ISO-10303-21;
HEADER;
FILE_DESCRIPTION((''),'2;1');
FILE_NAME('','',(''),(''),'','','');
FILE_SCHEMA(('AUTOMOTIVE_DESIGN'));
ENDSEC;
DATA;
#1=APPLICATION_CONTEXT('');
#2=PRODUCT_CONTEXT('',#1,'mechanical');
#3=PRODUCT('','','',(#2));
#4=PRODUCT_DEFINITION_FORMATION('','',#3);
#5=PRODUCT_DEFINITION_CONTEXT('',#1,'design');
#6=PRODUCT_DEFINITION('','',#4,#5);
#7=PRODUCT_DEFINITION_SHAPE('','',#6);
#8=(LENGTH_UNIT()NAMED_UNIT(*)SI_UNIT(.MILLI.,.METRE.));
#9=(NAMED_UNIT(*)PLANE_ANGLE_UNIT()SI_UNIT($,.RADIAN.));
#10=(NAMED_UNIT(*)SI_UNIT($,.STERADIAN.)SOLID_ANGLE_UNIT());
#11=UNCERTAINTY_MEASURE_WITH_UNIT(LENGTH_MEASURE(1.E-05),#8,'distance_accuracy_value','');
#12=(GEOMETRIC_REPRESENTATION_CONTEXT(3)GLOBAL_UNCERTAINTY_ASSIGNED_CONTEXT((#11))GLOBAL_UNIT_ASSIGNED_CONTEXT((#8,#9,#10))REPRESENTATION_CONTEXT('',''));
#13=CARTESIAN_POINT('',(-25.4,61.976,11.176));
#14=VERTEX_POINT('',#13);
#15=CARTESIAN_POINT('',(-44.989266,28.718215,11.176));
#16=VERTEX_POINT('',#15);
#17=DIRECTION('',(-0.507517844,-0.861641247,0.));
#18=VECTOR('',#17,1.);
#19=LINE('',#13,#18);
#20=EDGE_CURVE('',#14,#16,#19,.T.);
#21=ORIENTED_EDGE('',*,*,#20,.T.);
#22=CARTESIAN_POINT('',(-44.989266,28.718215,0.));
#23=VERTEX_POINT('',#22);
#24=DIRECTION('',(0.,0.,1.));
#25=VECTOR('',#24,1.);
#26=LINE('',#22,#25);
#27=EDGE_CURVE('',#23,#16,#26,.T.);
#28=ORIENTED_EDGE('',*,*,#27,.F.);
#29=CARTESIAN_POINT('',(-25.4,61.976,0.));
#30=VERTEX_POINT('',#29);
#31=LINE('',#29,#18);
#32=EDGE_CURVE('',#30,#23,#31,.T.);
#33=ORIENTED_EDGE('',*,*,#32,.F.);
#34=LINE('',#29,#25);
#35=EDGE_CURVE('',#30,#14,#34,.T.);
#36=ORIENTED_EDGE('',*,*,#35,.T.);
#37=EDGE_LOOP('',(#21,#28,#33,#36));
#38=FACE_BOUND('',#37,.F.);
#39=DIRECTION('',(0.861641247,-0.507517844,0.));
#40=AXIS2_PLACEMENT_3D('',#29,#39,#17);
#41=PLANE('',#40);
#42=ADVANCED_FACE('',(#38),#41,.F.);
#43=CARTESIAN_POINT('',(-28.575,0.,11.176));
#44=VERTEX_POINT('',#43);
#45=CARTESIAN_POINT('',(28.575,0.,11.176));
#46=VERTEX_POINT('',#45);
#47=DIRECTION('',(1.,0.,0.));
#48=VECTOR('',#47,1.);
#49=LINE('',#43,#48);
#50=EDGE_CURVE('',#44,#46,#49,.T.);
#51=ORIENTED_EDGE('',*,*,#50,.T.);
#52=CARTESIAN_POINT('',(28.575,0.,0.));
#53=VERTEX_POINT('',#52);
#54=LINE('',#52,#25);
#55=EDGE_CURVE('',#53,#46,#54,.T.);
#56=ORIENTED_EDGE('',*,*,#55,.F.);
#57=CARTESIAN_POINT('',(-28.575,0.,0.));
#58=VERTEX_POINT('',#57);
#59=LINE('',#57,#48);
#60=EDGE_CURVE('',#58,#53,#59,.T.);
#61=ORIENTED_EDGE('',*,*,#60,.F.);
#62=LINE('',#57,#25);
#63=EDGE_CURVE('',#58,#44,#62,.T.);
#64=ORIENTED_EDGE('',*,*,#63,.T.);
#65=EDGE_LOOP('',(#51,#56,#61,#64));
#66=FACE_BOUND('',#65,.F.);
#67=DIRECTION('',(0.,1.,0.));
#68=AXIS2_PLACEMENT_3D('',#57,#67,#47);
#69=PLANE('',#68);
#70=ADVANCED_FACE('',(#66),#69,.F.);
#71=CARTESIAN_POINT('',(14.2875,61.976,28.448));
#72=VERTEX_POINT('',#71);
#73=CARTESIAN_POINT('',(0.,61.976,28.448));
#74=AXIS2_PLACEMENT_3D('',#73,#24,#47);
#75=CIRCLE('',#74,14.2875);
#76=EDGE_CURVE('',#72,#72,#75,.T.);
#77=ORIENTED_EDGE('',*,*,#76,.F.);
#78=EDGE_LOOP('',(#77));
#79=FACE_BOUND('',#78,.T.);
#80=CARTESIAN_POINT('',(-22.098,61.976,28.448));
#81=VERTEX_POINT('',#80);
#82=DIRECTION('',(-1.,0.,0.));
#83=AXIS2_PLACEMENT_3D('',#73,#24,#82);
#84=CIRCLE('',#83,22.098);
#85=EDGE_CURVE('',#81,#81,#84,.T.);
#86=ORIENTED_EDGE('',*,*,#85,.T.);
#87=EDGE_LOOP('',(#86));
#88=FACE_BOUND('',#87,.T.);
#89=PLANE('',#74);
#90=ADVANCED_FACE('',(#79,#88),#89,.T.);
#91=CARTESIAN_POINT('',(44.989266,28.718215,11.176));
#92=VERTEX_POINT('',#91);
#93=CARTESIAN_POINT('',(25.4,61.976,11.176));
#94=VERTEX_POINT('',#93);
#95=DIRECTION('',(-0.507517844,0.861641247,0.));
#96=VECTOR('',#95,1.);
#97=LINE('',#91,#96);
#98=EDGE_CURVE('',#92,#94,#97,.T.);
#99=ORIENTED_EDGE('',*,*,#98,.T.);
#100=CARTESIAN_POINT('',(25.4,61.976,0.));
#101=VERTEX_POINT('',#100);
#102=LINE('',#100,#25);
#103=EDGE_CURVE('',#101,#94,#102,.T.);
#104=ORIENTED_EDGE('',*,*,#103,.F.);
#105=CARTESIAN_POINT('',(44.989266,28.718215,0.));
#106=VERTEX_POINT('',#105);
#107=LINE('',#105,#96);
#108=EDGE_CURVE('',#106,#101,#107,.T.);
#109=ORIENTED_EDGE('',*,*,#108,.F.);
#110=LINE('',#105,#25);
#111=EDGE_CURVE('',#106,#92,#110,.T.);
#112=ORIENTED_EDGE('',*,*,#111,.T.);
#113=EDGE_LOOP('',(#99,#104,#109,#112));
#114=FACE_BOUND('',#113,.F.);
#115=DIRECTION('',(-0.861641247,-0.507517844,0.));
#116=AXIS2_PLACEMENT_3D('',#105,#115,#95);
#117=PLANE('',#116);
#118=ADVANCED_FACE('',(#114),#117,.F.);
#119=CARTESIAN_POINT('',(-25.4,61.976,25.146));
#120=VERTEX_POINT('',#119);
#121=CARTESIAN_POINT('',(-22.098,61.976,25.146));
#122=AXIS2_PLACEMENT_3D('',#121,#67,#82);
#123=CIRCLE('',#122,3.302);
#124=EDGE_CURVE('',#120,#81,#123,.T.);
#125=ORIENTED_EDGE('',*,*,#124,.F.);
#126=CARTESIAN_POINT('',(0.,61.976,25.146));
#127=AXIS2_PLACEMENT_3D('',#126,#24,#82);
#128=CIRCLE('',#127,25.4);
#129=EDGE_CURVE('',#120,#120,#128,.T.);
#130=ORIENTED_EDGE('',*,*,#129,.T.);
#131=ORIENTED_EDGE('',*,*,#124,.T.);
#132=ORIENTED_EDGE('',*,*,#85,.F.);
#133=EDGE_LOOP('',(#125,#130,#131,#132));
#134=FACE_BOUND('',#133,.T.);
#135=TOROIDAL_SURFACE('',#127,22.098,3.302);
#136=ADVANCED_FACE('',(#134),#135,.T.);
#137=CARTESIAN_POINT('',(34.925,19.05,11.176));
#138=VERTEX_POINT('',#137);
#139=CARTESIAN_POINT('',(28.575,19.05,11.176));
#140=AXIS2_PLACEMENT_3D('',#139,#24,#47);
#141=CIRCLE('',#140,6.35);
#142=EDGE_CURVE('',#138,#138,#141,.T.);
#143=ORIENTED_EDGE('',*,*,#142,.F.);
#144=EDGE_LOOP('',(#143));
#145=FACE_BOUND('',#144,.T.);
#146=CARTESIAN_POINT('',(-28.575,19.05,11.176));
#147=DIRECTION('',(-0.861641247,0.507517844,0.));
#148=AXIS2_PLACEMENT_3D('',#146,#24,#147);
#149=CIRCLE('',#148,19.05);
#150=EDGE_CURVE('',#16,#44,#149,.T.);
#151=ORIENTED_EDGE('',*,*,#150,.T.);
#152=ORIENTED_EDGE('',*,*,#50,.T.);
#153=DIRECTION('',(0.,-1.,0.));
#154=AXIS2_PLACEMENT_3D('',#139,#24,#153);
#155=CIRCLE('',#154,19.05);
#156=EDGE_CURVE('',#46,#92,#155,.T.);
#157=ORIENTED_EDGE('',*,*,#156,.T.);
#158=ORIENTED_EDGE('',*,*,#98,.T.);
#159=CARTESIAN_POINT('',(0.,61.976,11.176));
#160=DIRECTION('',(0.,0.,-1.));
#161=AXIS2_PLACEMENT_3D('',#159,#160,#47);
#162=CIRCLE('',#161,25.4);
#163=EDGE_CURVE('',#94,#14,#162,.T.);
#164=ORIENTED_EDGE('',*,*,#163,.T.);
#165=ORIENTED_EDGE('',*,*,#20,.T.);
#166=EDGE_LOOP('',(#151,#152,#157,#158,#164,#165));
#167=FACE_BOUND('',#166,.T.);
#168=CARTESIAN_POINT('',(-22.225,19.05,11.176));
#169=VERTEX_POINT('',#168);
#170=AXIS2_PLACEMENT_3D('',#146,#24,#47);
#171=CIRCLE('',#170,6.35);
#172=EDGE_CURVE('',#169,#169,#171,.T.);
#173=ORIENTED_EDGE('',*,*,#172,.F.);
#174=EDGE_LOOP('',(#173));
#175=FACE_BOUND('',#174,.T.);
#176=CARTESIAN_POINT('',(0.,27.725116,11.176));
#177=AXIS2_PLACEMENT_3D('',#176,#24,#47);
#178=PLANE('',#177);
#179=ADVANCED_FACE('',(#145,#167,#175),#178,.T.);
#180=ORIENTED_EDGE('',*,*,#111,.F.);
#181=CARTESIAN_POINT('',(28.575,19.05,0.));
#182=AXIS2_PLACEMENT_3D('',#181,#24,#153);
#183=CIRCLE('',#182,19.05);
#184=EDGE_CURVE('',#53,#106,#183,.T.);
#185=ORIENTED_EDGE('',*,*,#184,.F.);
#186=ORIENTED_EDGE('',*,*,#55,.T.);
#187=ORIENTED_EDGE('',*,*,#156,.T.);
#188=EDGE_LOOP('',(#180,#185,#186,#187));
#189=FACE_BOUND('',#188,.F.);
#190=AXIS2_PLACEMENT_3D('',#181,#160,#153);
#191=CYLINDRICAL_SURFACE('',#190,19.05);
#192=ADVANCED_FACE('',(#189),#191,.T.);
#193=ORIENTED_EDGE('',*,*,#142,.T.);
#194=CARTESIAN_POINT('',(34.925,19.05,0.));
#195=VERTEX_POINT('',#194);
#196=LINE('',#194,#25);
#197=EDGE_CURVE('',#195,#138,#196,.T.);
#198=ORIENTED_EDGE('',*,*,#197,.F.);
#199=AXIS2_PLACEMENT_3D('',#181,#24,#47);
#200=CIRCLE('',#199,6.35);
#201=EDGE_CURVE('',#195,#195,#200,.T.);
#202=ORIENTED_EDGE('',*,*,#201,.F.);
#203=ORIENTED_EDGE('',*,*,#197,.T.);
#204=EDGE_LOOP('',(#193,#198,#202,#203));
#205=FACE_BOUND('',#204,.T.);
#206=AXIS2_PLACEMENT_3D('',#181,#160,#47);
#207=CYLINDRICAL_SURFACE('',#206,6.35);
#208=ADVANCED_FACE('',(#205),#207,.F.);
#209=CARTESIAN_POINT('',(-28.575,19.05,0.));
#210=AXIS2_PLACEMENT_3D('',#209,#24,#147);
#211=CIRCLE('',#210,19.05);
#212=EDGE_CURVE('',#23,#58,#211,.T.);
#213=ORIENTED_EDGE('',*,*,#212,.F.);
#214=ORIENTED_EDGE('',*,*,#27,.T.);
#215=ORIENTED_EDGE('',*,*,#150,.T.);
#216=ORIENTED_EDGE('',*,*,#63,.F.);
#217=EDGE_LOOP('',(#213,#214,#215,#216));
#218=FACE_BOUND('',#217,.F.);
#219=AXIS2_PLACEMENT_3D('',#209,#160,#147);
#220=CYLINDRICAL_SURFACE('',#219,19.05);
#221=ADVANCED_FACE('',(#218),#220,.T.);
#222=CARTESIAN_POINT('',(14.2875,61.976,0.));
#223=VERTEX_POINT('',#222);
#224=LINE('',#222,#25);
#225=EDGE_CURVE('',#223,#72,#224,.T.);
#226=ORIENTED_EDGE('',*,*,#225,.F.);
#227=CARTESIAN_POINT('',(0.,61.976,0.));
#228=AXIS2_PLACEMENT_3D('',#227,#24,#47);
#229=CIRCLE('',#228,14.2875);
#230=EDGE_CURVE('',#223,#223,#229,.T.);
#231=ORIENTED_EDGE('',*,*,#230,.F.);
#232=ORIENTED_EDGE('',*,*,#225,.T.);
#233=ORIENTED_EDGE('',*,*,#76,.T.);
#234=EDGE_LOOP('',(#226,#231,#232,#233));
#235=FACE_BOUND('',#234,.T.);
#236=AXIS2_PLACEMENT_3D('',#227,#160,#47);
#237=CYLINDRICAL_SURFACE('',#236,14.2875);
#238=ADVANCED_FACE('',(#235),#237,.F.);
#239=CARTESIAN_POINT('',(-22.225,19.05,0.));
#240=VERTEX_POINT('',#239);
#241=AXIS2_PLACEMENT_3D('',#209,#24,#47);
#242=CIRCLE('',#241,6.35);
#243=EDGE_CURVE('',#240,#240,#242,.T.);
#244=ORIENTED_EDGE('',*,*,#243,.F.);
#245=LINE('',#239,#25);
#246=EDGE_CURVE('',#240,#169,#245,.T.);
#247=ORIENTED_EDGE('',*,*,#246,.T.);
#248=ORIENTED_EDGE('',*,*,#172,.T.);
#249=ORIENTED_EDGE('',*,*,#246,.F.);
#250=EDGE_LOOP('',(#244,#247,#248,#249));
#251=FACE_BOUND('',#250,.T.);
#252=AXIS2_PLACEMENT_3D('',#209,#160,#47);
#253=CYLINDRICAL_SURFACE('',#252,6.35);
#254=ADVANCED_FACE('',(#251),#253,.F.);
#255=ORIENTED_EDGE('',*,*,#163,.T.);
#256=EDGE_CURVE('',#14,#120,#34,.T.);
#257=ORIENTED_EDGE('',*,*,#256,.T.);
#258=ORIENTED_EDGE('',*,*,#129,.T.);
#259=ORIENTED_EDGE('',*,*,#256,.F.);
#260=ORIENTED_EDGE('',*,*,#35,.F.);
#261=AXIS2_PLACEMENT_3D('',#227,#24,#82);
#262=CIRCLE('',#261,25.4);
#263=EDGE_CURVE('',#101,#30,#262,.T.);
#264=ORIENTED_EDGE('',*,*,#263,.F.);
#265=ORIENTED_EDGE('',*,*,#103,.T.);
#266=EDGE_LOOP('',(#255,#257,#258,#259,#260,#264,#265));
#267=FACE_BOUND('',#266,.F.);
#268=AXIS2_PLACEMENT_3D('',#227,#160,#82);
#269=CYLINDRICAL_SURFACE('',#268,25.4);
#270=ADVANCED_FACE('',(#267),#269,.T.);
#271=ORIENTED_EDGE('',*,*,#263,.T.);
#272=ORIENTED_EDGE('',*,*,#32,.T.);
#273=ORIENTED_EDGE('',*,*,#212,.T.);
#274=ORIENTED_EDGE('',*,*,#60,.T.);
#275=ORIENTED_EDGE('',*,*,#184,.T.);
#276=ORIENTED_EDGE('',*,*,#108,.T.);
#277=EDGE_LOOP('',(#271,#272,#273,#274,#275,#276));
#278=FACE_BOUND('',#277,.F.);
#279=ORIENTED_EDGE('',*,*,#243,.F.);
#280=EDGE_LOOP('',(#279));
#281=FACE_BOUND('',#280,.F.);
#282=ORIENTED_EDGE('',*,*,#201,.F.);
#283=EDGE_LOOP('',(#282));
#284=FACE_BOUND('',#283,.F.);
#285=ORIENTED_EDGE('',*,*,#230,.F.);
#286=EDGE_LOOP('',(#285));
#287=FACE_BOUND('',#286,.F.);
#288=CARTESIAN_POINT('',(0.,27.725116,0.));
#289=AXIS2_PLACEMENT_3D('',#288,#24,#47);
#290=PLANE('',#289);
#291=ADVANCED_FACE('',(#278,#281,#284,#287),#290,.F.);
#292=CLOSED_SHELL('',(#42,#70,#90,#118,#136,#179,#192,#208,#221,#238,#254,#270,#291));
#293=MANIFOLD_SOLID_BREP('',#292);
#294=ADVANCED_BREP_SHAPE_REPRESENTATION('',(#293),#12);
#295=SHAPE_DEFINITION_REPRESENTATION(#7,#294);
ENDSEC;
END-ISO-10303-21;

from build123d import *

# Parameters (mm, degrees)
F0_R     = 14.2875
F1_DEPTH = 28.448
F0_R_2   = 6.35
F2_DEPTH = 11.176
F3_R     = 3.302


with BuildPart() as f1:
    # F0 (on Top) → F1 (new body)
    with BuildSketch(Plane.XY):
        with BuildLine():
            ThreePointArc((25.4, 61.976), (0, 87.376), (-25.4, 61.976))
            ThreePointArc((-25.4, 61.976), (0, 36.576), (25.4, 61.976))
        make_face()
        with Locations((0, 61.976)):
            Circle(F0_R, mode=Mode.SUBTRACT)
    extrude(amount=F1_DEPTH)

    # F0 (on Top) → F2 (join)
    with BuildSketch(Plane.XY):
        with BuildLine():
            Line((-28.575, 0), (0, 0))
            Line((0, 0), (28.575, 0))
            ThreePointArc((28.575, 0), (45.1140748574, 9.5968786709), (44.989265753, 28.7182149226))
            Line((44.989265753, 28.7182149226), (25.4, 61.976))
            ThreePointArc((25.4, 61.976), (0, 36.576), (-25.4, 61.976))
            Line((-25.4, 61.976), (-44.989265753, 28.7182149226))
            ThreePointArc((-44.989265753, 28.7182149226), (-45.1140748574, 9.5968786709), (-28.575, 0))
        make_face()
        with Locations((-28.575, 19.05)):
            Circle(F0_R_2, mode=Mode.SUBTRACT)
        with Locations((28.575, 19.05)):
            Circle(F0_R_2, mode=Mode.SUBTRACT)
    extrude(amount=F2_DEPTH)

    # F3
    f3_edges = [f1.edges().sort_by_distance(p)[0] for p in [
        (25.4, 61.976, 28.448),
    ]]
    fillet(f3_edges, radius=F3_R)


solid = f1.part
